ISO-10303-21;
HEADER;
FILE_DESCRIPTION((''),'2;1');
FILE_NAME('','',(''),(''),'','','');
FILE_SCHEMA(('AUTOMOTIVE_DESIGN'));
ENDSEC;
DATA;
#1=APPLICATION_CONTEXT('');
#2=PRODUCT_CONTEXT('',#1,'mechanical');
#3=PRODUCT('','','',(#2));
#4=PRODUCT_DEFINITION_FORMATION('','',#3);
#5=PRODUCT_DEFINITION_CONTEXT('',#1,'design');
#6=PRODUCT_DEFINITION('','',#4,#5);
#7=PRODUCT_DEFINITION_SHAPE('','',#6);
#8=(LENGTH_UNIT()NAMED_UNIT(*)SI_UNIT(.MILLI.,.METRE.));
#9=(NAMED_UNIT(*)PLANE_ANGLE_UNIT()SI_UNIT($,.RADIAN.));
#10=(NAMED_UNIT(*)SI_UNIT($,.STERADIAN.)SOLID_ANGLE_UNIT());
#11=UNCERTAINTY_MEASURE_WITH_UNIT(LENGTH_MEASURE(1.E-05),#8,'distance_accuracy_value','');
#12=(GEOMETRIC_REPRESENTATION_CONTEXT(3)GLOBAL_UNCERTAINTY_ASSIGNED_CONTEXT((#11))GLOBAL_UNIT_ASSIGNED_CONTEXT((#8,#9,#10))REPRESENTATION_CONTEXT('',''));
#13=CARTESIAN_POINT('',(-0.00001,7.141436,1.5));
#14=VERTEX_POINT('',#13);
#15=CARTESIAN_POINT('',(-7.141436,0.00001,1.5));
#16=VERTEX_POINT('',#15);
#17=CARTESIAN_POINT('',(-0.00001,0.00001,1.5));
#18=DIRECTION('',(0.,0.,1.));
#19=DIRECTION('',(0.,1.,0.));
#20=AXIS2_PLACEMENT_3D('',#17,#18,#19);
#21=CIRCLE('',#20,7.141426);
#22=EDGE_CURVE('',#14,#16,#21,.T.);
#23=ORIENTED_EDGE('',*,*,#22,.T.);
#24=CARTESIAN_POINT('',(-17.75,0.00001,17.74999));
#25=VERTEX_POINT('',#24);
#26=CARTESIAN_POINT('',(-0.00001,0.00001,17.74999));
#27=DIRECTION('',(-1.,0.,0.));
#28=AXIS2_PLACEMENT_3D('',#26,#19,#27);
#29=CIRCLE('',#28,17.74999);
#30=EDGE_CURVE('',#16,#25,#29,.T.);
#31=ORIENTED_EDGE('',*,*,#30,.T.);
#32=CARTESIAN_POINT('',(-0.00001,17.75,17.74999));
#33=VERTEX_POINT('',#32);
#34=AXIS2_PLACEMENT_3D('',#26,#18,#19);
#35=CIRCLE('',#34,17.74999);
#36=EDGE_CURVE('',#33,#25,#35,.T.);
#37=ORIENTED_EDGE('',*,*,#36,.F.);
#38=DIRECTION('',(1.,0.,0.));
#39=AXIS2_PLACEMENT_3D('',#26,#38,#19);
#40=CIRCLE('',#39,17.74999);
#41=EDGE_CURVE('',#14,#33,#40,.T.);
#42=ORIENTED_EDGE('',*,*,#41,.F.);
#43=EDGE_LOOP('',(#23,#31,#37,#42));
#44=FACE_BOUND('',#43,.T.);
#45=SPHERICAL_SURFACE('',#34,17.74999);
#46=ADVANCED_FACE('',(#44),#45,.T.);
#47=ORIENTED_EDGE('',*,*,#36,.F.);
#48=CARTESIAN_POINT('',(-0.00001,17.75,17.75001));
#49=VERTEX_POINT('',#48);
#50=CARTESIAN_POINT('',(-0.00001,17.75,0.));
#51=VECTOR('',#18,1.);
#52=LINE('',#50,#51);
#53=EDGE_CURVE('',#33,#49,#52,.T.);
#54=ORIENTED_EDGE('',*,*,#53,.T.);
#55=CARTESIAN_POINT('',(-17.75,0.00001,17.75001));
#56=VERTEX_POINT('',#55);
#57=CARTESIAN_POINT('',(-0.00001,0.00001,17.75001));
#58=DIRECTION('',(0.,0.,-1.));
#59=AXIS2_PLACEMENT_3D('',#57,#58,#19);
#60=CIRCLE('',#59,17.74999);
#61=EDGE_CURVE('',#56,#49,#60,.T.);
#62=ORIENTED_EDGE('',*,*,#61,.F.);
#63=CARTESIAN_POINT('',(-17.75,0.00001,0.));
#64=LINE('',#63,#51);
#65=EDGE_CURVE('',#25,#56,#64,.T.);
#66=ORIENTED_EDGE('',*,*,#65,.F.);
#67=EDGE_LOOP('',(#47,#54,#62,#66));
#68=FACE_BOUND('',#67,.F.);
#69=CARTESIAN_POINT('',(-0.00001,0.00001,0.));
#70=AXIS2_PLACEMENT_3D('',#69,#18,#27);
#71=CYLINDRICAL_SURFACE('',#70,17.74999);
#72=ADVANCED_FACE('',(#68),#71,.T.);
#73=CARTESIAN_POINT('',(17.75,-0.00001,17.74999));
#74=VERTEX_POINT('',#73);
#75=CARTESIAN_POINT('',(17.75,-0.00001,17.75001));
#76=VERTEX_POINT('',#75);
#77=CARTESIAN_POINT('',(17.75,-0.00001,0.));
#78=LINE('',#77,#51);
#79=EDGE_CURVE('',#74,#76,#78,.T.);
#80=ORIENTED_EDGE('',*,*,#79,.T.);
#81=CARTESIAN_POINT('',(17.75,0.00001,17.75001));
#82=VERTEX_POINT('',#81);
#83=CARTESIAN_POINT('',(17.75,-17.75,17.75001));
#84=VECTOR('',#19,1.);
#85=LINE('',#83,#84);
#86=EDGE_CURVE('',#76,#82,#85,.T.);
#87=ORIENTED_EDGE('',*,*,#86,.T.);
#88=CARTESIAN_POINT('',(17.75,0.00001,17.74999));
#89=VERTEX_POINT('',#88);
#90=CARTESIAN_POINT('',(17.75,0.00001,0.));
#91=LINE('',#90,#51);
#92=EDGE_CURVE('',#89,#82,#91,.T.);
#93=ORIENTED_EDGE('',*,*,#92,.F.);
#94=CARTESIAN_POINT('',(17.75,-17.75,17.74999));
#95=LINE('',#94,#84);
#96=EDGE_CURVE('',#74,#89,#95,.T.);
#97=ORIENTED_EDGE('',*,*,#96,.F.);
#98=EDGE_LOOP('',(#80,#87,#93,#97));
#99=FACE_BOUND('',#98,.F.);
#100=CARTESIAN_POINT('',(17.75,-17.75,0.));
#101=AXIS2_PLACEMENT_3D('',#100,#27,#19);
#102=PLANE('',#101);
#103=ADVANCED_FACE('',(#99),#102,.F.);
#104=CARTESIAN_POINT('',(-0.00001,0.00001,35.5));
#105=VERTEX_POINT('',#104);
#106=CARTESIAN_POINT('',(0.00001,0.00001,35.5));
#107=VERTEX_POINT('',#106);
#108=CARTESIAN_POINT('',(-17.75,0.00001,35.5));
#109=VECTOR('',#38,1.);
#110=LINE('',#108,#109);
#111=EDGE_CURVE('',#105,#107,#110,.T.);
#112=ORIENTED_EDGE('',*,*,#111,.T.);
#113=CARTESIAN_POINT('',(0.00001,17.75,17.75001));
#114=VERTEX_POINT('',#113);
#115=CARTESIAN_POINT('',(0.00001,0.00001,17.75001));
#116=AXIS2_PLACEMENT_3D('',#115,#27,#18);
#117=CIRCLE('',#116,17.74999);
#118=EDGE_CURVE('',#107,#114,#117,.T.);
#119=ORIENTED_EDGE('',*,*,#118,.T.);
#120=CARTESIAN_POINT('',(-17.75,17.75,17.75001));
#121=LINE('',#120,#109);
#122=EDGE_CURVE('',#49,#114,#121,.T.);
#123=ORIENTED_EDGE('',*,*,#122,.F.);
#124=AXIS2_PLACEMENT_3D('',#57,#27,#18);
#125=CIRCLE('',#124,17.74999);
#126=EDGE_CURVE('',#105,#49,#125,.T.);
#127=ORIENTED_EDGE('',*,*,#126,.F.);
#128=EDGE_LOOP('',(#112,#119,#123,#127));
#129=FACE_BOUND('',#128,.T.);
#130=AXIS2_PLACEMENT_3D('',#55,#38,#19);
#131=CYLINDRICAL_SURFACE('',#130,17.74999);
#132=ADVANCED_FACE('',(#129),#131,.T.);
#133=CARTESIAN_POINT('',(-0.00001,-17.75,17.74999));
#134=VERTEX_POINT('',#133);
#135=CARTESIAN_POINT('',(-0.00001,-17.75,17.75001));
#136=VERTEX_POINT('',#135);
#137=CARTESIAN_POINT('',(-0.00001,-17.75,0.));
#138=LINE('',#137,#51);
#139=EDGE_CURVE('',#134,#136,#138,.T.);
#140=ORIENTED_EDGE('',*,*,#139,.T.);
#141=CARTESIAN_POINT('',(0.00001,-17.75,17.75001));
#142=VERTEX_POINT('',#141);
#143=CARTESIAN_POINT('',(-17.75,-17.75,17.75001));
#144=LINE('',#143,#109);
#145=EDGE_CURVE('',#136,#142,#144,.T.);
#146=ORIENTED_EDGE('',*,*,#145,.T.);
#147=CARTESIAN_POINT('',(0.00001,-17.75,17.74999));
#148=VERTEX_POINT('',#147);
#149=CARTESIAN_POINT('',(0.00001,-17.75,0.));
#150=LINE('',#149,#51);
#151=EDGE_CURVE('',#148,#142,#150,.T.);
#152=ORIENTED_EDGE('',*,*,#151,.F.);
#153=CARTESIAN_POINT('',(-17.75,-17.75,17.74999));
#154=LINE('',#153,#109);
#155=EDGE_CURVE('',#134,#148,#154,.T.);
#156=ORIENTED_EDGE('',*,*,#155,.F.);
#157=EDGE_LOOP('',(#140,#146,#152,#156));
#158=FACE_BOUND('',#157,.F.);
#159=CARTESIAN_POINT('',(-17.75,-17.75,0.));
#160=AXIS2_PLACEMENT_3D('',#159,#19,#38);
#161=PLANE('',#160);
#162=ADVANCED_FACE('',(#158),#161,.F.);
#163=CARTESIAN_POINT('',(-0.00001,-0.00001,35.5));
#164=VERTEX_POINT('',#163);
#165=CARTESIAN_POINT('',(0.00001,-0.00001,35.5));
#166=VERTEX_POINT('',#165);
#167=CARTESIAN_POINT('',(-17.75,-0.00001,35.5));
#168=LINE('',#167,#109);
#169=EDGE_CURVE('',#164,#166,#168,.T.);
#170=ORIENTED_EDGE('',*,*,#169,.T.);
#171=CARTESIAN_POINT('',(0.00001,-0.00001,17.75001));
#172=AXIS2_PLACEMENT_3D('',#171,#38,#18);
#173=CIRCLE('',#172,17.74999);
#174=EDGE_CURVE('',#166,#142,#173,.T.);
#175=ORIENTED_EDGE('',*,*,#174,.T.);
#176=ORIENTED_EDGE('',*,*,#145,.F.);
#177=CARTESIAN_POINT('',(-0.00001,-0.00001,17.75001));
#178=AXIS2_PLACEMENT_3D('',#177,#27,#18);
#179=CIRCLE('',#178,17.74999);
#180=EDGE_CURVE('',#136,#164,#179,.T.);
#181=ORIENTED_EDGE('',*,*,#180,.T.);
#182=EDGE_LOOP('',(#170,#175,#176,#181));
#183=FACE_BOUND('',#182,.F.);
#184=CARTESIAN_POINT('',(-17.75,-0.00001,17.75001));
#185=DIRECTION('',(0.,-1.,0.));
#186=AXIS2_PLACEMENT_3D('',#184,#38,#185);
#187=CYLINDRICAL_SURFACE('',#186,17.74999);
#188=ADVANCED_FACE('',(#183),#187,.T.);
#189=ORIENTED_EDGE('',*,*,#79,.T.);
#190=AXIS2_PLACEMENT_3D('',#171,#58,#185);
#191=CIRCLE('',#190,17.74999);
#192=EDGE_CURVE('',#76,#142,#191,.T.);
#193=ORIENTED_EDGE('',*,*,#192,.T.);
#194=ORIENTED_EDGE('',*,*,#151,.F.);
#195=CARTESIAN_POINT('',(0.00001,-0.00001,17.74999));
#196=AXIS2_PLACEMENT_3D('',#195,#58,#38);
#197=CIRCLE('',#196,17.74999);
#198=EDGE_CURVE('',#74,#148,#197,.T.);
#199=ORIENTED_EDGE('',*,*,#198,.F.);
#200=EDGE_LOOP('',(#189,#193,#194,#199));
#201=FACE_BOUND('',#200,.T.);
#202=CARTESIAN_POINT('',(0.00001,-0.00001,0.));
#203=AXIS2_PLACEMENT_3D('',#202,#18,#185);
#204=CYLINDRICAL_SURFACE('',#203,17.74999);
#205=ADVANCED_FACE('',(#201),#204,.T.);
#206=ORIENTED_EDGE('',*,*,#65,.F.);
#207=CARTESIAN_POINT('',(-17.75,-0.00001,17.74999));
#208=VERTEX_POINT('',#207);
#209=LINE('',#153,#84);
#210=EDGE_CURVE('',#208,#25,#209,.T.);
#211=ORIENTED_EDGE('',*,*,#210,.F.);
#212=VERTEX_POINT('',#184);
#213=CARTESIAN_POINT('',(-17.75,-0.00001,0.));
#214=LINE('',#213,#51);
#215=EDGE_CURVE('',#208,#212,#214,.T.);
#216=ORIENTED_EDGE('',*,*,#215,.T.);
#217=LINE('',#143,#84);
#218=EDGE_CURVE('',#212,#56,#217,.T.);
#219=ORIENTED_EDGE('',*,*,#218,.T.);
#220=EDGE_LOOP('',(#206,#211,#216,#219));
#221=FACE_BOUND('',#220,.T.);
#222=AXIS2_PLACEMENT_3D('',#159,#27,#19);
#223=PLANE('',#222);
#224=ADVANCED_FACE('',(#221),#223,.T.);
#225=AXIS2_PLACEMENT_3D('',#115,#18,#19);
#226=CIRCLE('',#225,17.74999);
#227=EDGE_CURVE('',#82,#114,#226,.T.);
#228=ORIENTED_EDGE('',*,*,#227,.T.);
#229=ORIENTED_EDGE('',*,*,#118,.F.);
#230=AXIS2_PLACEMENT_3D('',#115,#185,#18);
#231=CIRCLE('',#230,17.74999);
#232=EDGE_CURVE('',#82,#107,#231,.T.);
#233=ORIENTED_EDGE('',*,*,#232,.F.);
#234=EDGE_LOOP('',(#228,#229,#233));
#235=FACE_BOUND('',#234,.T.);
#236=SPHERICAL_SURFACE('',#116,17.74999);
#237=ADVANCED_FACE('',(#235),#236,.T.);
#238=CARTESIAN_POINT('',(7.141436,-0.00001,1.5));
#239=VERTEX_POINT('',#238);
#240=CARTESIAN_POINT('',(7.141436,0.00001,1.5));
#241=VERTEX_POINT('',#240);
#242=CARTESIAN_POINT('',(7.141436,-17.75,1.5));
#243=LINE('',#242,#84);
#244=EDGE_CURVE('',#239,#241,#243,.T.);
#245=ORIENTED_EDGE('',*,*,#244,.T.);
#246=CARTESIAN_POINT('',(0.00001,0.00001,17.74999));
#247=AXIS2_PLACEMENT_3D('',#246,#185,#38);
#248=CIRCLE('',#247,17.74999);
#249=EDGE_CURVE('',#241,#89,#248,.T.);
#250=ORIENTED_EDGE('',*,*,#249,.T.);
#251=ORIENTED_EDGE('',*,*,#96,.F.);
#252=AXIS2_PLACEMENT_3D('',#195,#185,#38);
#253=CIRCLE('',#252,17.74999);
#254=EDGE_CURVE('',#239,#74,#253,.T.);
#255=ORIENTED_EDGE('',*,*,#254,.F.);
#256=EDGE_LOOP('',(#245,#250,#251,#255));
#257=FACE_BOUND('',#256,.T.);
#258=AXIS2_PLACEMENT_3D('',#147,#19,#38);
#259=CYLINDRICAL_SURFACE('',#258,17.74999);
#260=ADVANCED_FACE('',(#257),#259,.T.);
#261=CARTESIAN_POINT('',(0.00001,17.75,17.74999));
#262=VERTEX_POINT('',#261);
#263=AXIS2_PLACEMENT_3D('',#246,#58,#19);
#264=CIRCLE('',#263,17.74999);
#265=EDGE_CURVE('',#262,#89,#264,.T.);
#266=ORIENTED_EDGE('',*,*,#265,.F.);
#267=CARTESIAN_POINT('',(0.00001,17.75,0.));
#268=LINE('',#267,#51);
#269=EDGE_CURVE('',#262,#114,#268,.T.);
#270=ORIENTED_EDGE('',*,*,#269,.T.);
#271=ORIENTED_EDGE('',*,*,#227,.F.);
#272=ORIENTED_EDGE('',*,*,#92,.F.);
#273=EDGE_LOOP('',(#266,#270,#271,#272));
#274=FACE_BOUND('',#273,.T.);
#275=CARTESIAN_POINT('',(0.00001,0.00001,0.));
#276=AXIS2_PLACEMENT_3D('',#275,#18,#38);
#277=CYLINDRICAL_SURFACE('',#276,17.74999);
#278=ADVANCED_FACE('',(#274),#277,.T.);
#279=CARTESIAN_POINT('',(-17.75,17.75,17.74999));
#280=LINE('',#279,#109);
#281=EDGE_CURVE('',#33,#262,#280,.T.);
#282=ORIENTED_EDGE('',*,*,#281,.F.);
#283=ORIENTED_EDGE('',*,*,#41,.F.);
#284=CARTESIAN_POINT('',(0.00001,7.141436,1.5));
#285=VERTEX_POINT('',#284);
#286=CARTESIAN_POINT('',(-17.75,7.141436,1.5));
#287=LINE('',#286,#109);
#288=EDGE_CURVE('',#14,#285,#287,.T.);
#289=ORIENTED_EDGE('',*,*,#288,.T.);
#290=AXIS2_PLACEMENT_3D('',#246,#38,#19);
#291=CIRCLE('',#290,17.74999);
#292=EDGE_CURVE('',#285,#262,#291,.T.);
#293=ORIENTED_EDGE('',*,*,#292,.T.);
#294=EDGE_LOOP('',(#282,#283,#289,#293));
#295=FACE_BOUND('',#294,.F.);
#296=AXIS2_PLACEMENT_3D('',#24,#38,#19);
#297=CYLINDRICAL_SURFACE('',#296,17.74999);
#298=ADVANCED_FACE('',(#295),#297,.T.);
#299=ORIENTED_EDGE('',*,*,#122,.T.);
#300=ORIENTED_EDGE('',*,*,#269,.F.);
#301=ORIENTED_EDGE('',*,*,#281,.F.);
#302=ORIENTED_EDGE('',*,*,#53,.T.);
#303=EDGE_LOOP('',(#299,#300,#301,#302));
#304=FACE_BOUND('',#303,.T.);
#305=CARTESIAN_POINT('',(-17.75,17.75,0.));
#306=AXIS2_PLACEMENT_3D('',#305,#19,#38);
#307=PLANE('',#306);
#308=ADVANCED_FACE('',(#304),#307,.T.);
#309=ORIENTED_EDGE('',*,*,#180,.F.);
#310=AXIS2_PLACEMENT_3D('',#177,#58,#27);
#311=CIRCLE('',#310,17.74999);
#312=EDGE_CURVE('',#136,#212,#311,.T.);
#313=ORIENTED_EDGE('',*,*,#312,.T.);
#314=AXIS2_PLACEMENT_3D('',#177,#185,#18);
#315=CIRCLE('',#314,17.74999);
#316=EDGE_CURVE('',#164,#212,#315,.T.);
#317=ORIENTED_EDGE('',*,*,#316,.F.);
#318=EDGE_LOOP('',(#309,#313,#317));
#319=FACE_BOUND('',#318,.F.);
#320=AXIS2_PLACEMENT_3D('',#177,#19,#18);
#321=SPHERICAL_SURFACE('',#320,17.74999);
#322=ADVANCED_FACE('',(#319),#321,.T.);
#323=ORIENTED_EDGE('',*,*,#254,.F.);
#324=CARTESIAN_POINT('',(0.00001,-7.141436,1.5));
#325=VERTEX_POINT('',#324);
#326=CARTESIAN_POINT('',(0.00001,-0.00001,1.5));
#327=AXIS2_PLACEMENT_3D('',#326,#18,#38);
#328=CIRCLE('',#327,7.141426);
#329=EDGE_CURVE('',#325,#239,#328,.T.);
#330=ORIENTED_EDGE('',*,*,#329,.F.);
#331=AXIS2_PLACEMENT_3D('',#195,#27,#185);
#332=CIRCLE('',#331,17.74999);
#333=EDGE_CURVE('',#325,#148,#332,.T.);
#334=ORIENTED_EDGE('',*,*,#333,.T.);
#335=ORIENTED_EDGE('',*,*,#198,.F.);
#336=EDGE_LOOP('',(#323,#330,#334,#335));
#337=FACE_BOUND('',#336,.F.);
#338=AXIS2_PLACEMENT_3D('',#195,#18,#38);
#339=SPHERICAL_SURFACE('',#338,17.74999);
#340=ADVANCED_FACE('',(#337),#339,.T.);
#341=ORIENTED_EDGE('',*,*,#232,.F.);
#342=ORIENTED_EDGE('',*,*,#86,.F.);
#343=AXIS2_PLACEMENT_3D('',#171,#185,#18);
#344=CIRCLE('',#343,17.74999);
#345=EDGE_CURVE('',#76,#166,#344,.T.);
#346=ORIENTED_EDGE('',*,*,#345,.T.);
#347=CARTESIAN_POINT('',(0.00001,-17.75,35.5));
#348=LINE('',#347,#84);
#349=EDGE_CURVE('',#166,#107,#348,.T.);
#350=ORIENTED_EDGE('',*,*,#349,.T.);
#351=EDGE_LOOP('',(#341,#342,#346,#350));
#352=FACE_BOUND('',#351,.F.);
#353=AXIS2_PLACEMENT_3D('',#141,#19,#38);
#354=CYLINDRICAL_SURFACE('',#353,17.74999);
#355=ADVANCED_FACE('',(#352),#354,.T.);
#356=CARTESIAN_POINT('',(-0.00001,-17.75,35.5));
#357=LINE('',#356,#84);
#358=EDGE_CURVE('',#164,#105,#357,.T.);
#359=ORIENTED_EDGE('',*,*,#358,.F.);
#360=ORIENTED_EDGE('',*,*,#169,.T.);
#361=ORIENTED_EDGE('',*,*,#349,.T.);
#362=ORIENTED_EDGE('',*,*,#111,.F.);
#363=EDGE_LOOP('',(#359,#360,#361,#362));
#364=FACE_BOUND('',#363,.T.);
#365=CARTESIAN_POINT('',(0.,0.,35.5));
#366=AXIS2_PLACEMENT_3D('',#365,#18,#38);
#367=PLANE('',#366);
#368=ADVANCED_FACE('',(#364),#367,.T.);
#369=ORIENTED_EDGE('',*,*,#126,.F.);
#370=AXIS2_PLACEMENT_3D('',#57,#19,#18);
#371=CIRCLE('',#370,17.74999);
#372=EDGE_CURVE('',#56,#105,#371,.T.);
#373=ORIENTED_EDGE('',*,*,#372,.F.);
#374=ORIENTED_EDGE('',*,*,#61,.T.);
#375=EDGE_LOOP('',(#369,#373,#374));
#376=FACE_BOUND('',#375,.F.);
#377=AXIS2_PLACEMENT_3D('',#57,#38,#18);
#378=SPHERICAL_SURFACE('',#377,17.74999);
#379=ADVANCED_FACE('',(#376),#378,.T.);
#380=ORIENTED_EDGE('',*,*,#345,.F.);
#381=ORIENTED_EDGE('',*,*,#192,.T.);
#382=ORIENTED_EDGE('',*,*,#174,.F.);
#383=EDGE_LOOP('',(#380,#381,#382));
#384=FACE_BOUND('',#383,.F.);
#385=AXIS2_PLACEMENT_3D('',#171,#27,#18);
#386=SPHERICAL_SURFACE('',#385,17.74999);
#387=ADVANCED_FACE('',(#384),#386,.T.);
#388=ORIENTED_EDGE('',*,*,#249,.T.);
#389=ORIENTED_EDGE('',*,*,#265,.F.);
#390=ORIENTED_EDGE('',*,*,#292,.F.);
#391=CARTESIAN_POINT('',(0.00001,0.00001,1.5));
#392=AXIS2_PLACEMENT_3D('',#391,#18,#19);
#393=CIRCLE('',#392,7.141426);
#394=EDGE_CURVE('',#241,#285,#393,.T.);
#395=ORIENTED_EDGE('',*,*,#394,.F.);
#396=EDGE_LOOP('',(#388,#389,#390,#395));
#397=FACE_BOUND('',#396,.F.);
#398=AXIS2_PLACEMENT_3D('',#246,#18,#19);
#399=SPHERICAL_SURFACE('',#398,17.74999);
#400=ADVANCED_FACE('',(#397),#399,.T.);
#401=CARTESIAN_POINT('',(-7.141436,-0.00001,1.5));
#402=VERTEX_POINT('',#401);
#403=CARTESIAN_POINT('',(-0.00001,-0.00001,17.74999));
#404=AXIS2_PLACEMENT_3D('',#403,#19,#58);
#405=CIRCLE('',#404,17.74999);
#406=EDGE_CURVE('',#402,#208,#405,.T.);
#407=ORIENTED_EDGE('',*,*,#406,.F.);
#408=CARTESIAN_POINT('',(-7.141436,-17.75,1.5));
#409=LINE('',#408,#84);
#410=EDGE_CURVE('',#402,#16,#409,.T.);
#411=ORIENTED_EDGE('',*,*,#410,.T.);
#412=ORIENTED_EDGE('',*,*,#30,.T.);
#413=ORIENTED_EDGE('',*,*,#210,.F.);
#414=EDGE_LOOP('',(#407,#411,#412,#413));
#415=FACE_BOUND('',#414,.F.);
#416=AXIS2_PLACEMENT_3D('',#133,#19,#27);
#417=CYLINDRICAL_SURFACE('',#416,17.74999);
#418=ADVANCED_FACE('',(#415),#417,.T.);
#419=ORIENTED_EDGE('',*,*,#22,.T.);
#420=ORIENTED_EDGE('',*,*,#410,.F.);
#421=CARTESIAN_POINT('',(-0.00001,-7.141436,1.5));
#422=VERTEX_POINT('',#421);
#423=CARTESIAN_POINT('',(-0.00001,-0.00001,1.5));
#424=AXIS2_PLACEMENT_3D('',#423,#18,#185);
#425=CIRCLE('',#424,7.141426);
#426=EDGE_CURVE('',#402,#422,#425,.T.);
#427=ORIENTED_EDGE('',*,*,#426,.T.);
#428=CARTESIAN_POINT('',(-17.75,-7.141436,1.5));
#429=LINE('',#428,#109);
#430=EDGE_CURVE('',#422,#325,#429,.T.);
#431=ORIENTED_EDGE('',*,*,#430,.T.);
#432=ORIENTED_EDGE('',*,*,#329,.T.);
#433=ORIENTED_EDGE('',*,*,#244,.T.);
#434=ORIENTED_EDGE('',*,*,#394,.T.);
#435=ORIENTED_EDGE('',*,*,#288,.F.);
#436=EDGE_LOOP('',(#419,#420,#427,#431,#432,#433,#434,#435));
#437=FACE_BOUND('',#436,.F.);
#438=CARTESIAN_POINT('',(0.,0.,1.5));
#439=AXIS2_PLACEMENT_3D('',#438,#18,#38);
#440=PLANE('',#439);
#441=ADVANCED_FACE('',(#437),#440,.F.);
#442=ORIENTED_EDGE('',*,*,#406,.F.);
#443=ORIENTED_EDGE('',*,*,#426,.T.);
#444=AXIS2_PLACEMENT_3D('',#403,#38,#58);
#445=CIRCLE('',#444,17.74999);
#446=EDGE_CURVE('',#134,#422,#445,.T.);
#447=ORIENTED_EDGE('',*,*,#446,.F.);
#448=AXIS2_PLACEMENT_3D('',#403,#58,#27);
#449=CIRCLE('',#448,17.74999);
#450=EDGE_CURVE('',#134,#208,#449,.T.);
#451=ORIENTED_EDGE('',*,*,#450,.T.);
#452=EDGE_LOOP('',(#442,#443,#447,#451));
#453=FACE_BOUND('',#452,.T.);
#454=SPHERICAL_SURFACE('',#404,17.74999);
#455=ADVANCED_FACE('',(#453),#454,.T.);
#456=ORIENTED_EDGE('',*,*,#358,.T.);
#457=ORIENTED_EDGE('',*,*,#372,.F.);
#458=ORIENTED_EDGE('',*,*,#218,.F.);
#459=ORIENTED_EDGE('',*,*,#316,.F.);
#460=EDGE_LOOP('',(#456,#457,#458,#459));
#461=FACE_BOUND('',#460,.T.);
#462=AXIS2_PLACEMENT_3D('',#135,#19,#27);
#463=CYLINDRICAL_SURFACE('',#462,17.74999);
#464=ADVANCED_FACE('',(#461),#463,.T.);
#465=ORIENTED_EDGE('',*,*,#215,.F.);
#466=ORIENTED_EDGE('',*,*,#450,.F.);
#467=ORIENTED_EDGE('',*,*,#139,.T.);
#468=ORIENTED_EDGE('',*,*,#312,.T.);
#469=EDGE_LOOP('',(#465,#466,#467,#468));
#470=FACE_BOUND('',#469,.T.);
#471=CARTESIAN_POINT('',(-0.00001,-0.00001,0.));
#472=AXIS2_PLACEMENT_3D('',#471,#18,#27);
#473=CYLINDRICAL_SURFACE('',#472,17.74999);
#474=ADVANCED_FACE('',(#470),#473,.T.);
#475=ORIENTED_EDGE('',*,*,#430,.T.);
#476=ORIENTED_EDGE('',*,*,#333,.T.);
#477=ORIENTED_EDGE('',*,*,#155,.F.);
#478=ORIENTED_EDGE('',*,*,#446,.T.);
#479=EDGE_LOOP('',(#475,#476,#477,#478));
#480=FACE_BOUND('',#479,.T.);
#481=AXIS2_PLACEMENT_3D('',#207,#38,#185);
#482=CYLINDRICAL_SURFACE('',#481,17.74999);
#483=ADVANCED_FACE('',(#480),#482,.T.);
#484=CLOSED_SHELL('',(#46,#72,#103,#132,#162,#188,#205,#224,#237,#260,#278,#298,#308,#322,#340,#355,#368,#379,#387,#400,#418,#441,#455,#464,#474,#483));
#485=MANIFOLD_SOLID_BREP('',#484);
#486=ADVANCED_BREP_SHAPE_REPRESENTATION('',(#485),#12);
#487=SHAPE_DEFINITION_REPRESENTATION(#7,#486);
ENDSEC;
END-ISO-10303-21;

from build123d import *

# Parameters (mm, degrees)
F0_W     = 35.5
F0_H     = 35.5
F1_DEPTH = 35.5
F2_R     = 17.74999
F3_DEPTH = 1.5


# Not quite as in the source:
# - a fillet or chamfer is up to 0.001 mm smaller than in the source, because OpenCascade refuses the exact size


with BuildPart() as f1:
    # F0 (on Top) → F1 (new body)
    with BuildSketch(Plane.XY):
        Rectangle(F0_W, F0_H)
    extrude(amount=F1_DEPTH)

    # F2 (radius 17.75 in the source; OpenCascade refuses exactly that, so slightly less here)
    f2_edges = [f1.edges().sort_by_distance(p)[0] for p in [
        (0, 17.75, 35.5),
        (-17.75, 0, 35.5),
        (0, -17.75, 35.5),
        (17.75, 0, 35.5),
        (17.75, 17.75, 17.75),
        (-17.75, 17.75, 17.75),
        (0, 17.75, 0),
        (17.75, -17.75, 17.75),
        (17.75, 0, 0),
        (-17.75, 0, 0),
        (0, -17.75, 0),
        (-17.75, -17.75, 17.75),
    ]]
    fillet(f2_edges, radius=F2_R)


with BuildPart() as f3:
    # F0 (on Top) → F3 (new body, symmetric)
    with BuildSketch(Plane.XY):
        Rectangle(F0_W, F0_H)
    extrude(amount=F3_DEPTH, both=True)


with BuildPart() as f1_1:
    add(f1.part)

    # F4: cut F3
    add(f3.part, mode=Mode.SUBTRACT)


solid = f1_1.part
